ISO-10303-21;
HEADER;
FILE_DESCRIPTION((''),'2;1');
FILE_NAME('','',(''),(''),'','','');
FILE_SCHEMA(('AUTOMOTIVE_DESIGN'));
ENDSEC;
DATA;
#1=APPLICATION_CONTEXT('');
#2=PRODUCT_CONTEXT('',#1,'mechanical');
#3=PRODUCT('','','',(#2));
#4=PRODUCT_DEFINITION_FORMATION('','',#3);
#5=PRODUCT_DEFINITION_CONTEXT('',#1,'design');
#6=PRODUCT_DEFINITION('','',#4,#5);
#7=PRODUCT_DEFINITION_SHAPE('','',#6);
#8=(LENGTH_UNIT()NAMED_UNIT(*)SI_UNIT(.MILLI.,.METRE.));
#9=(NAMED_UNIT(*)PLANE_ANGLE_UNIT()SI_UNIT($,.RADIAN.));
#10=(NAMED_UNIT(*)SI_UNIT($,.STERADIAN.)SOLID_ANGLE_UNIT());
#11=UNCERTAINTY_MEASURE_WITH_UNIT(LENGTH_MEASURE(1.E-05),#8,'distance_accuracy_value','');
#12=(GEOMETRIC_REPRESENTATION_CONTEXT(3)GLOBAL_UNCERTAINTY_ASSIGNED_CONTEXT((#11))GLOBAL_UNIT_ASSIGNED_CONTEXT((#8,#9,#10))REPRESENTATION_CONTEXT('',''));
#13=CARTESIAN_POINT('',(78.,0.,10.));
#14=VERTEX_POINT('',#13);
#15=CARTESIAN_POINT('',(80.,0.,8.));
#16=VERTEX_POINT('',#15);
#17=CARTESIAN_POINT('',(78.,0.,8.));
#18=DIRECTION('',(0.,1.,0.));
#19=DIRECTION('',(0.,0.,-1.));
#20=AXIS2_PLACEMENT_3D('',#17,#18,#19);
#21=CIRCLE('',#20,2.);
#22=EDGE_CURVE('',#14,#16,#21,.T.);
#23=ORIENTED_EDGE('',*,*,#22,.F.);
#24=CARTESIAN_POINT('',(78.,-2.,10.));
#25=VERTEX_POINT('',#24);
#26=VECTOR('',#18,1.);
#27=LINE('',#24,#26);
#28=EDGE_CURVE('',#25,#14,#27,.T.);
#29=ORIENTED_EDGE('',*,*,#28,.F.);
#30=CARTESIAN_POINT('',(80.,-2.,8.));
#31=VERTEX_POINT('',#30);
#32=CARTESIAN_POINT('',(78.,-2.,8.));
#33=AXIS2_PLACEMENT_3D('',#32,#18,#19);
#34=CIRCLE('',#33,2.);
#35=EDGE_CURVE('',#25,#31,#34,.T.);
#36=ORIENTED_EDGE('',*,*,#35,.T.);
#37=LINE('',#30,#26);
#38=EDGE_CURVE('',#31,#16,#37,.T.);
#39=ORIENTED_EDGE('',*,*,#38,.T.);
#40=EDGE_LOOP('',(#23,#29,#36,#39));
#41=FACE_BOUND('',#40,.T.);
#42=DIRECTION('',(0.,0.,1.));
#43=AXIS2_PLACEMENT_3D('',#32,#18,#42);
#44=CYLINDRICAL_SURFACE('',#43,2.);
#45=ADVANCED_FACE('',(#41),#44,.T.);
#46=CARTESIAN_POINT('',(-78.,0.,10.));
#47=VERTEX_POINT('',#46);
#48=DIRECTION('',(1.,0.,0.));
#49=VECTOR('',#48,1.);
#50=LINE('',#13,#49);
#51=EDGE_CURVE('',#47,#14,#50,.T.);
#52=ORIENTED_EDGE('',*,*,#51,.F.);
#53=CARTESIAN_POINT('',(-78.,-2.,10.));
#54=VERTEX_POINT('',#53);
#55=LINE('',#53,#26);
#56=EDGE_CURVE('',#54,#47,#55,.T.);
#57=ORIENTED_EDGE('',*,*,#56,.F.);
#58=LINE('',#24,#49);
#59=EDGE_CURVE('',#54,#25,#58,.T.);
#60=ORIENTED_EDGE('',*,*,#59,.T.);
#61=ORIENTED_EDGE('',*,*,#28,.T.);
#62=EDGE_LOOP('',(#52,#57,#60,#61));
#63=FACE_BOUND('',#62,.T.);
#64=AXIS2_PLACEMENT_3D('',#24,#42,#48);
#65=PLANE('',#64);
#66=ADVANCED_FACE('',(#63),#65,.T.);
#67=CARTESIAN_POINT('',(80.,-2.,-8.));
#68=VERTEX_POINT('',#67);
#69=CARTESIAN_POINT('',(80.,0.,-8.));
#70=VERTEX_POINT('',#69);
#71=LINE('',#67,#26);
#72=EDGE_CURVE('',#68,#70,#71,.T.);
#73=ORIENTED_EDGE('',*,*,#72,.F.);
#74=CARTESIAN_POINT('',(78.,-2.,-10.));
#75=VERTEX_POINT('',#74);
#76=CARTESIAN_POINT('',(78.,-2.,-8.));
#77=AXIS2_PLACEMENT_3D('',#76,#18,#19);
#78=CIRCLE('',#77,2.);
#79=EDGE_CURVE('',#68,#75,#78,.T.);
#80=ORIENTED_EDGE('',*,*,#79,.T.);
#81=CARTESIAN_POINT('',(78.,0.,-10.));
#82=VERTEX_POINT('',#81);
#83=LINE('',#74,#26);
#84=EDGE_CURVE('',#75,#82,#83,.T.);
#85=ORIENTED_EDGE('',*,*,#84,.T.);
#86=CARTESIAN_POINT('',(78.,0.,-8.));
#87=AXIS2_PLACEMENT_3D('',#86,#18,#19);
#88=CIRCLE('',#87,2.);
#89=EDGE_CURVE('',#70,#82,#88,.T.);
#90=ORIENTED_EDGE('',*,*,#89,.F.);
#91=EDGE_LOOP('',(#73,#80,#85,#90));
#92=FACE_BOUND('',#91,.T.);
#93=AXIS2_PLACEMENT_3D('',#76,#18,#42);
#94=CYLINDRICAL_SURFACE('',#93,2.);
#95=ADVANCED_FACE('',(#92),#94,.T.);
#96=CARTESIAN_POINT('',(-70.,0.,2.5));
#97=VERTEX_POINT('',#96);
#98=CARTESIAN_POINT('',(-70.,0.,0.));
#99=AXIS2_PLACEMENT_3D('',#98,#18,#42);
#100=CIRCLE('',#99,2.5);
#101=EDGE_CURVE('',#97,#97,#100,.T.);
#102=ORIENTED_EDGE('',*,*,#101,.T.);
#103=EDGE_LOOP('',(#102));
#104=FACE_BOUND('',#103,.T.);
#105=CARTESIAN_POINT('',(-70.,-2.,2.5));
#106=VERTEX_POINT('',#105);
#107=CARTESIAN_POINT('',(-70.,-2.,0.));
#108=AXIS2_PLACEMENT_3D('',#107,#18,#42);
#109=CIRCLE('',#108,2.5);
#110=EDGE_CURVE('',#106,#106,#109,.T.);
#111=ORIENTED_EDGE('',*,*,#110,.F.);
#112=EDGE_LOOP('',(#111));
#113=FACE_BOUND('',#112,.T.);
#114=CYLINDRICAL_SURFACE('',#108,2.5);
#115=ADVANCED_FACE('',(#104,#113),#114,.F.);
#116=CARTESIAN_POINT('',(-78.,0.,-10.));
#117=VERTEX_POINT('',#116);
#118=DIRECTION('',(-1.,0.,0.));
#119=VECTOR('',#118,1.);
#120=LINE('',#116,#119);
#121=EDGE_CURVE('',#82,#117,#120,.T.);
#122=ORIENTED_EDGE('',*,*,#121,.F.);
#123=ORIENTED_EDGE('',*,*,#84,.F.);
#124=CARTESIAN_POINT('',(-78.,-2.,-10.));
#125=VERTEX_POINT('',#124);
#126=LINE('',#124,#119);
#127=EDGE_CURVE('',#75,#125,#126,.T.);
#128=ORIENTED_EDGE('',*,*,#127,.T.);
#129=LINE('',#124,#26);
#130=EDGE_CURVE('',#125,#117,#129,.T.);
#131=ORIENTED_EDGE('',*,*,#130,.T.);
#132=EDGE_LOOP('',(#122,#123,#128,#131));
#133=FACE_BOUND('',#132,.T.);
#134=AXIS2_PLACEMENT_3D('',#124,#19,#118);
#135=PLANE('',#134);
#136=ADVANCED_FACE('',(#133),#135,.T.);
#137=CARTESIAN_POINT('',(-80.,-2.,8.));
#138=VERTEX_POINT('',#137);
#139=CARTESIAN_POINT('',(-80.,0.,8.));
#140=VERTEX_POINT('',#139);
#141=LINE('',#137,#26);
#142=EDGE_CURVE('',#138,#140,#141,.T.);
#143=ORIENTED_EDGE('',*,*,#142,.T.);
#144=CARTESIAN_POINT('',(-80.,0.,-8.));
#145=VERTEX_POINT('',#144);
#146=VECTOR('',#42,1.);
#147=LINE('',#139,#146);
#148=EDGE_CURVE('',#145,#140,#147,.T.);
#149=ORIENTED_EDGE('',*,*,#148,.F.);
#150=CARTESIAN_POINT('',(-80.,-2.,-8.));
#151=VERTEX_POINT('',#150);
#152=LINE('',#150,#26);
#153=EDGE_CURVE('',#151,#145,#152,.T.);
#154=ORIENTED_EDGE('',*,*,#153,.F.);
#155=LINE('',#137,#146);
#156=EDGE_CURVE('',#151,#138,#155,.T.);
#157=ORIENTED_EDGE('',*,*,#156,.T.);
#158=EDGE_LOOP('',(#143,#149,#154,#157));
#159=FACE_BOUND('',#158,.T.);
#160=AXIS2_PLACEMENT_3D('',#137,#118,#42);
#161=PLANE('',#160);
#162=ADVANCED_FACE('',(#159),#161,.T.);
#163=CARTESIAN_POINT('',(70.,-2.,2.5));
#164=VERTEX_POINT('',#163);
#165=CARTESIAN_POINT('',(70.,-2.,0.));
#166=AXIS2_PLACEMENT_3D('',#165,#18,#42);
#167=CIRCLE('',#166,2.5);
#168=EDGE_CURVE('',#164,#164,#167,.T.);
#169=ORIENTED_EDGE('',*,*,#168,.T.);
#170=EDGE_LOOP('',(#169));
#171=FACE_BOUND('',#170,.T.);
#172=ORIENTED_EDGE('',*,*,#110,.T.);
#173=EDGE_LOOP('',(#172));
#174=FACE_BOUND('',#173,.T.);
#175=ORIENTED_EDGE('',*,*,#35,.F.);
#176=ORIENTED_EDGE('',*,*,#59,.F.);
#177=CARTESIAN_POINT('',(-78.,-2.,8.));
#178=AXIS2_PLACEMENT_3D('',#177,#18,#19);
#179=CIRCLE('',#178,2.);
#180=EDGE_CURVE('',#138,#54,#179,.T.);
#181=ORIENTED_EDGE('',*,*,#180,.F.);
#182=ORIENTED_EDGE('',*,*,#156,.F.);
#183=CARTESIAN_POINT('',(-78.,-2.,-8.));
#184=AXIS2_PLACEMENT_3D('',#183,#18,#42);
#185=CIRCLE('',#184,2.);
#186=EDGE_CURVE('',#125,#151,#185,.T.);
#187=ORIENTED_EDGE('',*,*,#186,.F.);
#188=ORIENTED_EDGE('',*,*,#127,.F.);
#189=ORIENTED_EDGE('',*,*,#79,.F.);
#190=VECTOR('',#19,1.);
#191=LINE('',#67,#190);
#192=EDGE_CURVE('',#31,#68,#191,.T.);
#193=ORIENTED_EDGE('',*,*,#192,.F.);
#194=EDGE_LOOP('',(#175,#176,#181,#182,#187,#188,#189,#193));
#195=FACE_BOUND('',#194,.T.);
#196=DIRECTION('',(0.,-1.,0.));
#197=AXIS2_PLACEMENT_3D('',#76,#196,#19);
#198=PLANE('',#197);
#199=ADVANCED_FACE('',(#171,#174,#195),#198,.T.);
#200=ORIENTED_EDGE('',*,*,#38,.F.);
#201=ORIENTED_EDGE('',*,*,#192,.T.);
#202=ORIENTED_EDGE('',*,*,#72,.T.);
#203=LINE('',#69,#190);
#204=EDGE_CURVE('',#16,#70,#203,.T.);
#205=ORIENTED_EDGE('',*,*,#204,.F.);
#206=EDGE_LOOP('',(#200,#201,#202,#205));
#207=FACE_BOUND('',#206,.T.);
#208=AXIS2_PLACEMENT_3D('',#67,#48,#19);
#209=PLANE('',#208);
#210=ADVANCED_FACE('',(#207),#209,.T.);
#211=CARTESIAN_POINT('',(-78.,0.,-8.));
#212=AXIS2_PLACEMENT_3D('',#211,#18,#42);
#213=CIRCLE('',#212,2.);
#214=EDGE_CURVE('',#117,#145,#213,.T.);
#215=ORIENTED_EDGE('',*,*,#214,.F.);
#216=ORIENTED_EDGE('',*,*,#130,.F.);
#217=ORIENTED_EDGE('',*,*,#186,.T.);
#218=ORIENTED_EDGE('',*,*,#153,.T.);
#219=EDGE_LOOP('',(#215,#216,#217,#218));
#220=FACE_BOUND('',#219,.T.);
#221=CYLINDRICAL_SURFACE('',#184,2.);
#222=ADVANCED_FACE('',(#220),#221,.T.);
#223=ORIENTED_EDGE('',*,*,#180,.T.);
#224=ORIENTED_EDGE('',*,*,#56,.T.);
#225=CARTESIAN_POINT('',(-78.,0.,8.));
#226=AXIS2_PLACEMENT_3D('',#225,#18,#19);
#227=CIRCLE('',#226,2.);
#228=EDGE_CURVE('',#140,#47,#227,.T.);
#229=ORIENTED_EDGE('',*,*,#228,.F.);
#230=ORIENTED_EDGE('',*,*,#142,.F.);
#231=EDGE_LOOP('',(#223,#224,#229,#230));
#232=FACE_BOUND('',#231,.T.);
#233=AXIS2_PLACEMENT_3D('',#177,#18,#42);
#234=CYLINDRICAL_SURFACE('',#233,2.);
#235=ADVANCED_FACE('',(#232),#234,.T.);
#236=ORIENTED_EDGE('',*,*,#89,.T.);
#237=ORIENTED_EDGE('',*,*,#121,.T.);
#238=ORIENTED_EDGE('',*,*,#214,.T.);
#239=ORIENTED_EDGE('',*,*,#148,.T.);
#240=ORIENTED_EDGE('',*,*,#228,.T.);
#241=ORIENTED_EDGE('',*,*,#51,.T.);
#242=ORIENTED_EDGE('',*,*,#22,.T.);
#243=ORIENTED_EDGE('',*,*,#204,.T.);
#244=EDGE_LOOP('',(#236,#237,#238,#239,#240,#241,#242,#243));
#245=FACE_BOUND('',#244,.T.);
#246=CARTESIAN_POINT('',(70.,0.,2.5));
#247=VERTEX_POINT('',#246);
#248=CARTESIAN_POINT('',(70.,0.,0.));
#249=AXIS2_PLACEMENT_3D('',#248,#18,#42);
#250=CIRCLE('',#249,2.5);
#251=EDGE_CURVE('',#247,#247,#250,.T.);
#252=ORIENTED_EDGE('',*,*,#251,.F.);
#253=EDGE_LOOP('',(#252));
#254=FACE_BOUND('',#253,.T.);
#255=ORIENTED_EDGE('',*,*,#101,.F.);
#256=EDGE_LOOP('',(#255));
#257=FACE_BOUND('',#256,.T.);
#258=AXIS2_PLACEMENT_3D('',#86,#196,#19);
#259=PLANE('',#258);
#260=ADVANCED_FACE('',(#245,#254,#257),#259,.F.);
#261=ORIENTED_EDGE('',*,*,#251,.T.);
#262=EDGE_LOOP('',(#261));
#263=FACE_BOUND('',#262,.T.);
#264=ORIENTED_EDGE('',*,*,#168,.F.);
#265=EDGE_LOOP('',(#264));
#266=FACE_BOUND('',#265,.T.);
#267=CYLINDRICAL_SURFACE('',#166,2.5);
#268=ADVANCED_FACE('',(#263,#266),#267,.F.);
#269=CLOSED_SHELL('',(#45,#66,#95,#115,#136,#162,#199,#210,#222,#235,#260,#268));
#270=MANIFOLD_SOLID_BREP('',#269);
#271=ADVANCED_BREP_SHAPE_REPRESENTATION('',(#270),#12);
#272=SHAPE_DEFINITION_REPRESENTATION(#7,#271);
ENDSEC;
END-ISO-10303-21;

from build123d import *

# Parameters (mm, degrees)
SKETCH_1_R             = 2.5
SM_BASE_FLANGE_1_DEPTH = 2


# Sheet-metal steps are written as plain solids
with BuildPart() as part:
    # Sketch 1 → 基体-法兰1 (new body)
    with BuildSketch(Plane(origin=(0, 0, 0), x_dir=(1, 0, 0), z_dir=(0, 1, 0))):
        with BuildLine():
            Line((-78, 10), (78, 10))
            ThreePointArc((78, 10), (79.414213562, 9.414213562), (80, 8))
            Line((80, 8), (80, -8))
            ThreePointArc((80, -8), (79.414213562, -9.414213562), (78, -10))
            Line((78, -10), (-78, -10))
            ThreePointArc((-78, -10), (-79.414213562, -9.414213562), (-80, -8))
            Line((-80, -8), (-80, 8))
            ThreePointArc((-80, 8), (-79.414213562, 9.414213562), (-78, 10))
        make_face()
        with Locations(Location((-70, 0, 0), (0, 0, 270))):
            Circle(SKETCH_1_R, mode=Mode.SUBTRACT)
        with Locations(Location((70, 0, 0), (0, 0, 270))):
            Circle(SKETCH_1_R, mode=Mode.SUBTRACT)
    extrude(amount=-SM_BASE_FLANGE_1_DEPTH)


solid = part.part
